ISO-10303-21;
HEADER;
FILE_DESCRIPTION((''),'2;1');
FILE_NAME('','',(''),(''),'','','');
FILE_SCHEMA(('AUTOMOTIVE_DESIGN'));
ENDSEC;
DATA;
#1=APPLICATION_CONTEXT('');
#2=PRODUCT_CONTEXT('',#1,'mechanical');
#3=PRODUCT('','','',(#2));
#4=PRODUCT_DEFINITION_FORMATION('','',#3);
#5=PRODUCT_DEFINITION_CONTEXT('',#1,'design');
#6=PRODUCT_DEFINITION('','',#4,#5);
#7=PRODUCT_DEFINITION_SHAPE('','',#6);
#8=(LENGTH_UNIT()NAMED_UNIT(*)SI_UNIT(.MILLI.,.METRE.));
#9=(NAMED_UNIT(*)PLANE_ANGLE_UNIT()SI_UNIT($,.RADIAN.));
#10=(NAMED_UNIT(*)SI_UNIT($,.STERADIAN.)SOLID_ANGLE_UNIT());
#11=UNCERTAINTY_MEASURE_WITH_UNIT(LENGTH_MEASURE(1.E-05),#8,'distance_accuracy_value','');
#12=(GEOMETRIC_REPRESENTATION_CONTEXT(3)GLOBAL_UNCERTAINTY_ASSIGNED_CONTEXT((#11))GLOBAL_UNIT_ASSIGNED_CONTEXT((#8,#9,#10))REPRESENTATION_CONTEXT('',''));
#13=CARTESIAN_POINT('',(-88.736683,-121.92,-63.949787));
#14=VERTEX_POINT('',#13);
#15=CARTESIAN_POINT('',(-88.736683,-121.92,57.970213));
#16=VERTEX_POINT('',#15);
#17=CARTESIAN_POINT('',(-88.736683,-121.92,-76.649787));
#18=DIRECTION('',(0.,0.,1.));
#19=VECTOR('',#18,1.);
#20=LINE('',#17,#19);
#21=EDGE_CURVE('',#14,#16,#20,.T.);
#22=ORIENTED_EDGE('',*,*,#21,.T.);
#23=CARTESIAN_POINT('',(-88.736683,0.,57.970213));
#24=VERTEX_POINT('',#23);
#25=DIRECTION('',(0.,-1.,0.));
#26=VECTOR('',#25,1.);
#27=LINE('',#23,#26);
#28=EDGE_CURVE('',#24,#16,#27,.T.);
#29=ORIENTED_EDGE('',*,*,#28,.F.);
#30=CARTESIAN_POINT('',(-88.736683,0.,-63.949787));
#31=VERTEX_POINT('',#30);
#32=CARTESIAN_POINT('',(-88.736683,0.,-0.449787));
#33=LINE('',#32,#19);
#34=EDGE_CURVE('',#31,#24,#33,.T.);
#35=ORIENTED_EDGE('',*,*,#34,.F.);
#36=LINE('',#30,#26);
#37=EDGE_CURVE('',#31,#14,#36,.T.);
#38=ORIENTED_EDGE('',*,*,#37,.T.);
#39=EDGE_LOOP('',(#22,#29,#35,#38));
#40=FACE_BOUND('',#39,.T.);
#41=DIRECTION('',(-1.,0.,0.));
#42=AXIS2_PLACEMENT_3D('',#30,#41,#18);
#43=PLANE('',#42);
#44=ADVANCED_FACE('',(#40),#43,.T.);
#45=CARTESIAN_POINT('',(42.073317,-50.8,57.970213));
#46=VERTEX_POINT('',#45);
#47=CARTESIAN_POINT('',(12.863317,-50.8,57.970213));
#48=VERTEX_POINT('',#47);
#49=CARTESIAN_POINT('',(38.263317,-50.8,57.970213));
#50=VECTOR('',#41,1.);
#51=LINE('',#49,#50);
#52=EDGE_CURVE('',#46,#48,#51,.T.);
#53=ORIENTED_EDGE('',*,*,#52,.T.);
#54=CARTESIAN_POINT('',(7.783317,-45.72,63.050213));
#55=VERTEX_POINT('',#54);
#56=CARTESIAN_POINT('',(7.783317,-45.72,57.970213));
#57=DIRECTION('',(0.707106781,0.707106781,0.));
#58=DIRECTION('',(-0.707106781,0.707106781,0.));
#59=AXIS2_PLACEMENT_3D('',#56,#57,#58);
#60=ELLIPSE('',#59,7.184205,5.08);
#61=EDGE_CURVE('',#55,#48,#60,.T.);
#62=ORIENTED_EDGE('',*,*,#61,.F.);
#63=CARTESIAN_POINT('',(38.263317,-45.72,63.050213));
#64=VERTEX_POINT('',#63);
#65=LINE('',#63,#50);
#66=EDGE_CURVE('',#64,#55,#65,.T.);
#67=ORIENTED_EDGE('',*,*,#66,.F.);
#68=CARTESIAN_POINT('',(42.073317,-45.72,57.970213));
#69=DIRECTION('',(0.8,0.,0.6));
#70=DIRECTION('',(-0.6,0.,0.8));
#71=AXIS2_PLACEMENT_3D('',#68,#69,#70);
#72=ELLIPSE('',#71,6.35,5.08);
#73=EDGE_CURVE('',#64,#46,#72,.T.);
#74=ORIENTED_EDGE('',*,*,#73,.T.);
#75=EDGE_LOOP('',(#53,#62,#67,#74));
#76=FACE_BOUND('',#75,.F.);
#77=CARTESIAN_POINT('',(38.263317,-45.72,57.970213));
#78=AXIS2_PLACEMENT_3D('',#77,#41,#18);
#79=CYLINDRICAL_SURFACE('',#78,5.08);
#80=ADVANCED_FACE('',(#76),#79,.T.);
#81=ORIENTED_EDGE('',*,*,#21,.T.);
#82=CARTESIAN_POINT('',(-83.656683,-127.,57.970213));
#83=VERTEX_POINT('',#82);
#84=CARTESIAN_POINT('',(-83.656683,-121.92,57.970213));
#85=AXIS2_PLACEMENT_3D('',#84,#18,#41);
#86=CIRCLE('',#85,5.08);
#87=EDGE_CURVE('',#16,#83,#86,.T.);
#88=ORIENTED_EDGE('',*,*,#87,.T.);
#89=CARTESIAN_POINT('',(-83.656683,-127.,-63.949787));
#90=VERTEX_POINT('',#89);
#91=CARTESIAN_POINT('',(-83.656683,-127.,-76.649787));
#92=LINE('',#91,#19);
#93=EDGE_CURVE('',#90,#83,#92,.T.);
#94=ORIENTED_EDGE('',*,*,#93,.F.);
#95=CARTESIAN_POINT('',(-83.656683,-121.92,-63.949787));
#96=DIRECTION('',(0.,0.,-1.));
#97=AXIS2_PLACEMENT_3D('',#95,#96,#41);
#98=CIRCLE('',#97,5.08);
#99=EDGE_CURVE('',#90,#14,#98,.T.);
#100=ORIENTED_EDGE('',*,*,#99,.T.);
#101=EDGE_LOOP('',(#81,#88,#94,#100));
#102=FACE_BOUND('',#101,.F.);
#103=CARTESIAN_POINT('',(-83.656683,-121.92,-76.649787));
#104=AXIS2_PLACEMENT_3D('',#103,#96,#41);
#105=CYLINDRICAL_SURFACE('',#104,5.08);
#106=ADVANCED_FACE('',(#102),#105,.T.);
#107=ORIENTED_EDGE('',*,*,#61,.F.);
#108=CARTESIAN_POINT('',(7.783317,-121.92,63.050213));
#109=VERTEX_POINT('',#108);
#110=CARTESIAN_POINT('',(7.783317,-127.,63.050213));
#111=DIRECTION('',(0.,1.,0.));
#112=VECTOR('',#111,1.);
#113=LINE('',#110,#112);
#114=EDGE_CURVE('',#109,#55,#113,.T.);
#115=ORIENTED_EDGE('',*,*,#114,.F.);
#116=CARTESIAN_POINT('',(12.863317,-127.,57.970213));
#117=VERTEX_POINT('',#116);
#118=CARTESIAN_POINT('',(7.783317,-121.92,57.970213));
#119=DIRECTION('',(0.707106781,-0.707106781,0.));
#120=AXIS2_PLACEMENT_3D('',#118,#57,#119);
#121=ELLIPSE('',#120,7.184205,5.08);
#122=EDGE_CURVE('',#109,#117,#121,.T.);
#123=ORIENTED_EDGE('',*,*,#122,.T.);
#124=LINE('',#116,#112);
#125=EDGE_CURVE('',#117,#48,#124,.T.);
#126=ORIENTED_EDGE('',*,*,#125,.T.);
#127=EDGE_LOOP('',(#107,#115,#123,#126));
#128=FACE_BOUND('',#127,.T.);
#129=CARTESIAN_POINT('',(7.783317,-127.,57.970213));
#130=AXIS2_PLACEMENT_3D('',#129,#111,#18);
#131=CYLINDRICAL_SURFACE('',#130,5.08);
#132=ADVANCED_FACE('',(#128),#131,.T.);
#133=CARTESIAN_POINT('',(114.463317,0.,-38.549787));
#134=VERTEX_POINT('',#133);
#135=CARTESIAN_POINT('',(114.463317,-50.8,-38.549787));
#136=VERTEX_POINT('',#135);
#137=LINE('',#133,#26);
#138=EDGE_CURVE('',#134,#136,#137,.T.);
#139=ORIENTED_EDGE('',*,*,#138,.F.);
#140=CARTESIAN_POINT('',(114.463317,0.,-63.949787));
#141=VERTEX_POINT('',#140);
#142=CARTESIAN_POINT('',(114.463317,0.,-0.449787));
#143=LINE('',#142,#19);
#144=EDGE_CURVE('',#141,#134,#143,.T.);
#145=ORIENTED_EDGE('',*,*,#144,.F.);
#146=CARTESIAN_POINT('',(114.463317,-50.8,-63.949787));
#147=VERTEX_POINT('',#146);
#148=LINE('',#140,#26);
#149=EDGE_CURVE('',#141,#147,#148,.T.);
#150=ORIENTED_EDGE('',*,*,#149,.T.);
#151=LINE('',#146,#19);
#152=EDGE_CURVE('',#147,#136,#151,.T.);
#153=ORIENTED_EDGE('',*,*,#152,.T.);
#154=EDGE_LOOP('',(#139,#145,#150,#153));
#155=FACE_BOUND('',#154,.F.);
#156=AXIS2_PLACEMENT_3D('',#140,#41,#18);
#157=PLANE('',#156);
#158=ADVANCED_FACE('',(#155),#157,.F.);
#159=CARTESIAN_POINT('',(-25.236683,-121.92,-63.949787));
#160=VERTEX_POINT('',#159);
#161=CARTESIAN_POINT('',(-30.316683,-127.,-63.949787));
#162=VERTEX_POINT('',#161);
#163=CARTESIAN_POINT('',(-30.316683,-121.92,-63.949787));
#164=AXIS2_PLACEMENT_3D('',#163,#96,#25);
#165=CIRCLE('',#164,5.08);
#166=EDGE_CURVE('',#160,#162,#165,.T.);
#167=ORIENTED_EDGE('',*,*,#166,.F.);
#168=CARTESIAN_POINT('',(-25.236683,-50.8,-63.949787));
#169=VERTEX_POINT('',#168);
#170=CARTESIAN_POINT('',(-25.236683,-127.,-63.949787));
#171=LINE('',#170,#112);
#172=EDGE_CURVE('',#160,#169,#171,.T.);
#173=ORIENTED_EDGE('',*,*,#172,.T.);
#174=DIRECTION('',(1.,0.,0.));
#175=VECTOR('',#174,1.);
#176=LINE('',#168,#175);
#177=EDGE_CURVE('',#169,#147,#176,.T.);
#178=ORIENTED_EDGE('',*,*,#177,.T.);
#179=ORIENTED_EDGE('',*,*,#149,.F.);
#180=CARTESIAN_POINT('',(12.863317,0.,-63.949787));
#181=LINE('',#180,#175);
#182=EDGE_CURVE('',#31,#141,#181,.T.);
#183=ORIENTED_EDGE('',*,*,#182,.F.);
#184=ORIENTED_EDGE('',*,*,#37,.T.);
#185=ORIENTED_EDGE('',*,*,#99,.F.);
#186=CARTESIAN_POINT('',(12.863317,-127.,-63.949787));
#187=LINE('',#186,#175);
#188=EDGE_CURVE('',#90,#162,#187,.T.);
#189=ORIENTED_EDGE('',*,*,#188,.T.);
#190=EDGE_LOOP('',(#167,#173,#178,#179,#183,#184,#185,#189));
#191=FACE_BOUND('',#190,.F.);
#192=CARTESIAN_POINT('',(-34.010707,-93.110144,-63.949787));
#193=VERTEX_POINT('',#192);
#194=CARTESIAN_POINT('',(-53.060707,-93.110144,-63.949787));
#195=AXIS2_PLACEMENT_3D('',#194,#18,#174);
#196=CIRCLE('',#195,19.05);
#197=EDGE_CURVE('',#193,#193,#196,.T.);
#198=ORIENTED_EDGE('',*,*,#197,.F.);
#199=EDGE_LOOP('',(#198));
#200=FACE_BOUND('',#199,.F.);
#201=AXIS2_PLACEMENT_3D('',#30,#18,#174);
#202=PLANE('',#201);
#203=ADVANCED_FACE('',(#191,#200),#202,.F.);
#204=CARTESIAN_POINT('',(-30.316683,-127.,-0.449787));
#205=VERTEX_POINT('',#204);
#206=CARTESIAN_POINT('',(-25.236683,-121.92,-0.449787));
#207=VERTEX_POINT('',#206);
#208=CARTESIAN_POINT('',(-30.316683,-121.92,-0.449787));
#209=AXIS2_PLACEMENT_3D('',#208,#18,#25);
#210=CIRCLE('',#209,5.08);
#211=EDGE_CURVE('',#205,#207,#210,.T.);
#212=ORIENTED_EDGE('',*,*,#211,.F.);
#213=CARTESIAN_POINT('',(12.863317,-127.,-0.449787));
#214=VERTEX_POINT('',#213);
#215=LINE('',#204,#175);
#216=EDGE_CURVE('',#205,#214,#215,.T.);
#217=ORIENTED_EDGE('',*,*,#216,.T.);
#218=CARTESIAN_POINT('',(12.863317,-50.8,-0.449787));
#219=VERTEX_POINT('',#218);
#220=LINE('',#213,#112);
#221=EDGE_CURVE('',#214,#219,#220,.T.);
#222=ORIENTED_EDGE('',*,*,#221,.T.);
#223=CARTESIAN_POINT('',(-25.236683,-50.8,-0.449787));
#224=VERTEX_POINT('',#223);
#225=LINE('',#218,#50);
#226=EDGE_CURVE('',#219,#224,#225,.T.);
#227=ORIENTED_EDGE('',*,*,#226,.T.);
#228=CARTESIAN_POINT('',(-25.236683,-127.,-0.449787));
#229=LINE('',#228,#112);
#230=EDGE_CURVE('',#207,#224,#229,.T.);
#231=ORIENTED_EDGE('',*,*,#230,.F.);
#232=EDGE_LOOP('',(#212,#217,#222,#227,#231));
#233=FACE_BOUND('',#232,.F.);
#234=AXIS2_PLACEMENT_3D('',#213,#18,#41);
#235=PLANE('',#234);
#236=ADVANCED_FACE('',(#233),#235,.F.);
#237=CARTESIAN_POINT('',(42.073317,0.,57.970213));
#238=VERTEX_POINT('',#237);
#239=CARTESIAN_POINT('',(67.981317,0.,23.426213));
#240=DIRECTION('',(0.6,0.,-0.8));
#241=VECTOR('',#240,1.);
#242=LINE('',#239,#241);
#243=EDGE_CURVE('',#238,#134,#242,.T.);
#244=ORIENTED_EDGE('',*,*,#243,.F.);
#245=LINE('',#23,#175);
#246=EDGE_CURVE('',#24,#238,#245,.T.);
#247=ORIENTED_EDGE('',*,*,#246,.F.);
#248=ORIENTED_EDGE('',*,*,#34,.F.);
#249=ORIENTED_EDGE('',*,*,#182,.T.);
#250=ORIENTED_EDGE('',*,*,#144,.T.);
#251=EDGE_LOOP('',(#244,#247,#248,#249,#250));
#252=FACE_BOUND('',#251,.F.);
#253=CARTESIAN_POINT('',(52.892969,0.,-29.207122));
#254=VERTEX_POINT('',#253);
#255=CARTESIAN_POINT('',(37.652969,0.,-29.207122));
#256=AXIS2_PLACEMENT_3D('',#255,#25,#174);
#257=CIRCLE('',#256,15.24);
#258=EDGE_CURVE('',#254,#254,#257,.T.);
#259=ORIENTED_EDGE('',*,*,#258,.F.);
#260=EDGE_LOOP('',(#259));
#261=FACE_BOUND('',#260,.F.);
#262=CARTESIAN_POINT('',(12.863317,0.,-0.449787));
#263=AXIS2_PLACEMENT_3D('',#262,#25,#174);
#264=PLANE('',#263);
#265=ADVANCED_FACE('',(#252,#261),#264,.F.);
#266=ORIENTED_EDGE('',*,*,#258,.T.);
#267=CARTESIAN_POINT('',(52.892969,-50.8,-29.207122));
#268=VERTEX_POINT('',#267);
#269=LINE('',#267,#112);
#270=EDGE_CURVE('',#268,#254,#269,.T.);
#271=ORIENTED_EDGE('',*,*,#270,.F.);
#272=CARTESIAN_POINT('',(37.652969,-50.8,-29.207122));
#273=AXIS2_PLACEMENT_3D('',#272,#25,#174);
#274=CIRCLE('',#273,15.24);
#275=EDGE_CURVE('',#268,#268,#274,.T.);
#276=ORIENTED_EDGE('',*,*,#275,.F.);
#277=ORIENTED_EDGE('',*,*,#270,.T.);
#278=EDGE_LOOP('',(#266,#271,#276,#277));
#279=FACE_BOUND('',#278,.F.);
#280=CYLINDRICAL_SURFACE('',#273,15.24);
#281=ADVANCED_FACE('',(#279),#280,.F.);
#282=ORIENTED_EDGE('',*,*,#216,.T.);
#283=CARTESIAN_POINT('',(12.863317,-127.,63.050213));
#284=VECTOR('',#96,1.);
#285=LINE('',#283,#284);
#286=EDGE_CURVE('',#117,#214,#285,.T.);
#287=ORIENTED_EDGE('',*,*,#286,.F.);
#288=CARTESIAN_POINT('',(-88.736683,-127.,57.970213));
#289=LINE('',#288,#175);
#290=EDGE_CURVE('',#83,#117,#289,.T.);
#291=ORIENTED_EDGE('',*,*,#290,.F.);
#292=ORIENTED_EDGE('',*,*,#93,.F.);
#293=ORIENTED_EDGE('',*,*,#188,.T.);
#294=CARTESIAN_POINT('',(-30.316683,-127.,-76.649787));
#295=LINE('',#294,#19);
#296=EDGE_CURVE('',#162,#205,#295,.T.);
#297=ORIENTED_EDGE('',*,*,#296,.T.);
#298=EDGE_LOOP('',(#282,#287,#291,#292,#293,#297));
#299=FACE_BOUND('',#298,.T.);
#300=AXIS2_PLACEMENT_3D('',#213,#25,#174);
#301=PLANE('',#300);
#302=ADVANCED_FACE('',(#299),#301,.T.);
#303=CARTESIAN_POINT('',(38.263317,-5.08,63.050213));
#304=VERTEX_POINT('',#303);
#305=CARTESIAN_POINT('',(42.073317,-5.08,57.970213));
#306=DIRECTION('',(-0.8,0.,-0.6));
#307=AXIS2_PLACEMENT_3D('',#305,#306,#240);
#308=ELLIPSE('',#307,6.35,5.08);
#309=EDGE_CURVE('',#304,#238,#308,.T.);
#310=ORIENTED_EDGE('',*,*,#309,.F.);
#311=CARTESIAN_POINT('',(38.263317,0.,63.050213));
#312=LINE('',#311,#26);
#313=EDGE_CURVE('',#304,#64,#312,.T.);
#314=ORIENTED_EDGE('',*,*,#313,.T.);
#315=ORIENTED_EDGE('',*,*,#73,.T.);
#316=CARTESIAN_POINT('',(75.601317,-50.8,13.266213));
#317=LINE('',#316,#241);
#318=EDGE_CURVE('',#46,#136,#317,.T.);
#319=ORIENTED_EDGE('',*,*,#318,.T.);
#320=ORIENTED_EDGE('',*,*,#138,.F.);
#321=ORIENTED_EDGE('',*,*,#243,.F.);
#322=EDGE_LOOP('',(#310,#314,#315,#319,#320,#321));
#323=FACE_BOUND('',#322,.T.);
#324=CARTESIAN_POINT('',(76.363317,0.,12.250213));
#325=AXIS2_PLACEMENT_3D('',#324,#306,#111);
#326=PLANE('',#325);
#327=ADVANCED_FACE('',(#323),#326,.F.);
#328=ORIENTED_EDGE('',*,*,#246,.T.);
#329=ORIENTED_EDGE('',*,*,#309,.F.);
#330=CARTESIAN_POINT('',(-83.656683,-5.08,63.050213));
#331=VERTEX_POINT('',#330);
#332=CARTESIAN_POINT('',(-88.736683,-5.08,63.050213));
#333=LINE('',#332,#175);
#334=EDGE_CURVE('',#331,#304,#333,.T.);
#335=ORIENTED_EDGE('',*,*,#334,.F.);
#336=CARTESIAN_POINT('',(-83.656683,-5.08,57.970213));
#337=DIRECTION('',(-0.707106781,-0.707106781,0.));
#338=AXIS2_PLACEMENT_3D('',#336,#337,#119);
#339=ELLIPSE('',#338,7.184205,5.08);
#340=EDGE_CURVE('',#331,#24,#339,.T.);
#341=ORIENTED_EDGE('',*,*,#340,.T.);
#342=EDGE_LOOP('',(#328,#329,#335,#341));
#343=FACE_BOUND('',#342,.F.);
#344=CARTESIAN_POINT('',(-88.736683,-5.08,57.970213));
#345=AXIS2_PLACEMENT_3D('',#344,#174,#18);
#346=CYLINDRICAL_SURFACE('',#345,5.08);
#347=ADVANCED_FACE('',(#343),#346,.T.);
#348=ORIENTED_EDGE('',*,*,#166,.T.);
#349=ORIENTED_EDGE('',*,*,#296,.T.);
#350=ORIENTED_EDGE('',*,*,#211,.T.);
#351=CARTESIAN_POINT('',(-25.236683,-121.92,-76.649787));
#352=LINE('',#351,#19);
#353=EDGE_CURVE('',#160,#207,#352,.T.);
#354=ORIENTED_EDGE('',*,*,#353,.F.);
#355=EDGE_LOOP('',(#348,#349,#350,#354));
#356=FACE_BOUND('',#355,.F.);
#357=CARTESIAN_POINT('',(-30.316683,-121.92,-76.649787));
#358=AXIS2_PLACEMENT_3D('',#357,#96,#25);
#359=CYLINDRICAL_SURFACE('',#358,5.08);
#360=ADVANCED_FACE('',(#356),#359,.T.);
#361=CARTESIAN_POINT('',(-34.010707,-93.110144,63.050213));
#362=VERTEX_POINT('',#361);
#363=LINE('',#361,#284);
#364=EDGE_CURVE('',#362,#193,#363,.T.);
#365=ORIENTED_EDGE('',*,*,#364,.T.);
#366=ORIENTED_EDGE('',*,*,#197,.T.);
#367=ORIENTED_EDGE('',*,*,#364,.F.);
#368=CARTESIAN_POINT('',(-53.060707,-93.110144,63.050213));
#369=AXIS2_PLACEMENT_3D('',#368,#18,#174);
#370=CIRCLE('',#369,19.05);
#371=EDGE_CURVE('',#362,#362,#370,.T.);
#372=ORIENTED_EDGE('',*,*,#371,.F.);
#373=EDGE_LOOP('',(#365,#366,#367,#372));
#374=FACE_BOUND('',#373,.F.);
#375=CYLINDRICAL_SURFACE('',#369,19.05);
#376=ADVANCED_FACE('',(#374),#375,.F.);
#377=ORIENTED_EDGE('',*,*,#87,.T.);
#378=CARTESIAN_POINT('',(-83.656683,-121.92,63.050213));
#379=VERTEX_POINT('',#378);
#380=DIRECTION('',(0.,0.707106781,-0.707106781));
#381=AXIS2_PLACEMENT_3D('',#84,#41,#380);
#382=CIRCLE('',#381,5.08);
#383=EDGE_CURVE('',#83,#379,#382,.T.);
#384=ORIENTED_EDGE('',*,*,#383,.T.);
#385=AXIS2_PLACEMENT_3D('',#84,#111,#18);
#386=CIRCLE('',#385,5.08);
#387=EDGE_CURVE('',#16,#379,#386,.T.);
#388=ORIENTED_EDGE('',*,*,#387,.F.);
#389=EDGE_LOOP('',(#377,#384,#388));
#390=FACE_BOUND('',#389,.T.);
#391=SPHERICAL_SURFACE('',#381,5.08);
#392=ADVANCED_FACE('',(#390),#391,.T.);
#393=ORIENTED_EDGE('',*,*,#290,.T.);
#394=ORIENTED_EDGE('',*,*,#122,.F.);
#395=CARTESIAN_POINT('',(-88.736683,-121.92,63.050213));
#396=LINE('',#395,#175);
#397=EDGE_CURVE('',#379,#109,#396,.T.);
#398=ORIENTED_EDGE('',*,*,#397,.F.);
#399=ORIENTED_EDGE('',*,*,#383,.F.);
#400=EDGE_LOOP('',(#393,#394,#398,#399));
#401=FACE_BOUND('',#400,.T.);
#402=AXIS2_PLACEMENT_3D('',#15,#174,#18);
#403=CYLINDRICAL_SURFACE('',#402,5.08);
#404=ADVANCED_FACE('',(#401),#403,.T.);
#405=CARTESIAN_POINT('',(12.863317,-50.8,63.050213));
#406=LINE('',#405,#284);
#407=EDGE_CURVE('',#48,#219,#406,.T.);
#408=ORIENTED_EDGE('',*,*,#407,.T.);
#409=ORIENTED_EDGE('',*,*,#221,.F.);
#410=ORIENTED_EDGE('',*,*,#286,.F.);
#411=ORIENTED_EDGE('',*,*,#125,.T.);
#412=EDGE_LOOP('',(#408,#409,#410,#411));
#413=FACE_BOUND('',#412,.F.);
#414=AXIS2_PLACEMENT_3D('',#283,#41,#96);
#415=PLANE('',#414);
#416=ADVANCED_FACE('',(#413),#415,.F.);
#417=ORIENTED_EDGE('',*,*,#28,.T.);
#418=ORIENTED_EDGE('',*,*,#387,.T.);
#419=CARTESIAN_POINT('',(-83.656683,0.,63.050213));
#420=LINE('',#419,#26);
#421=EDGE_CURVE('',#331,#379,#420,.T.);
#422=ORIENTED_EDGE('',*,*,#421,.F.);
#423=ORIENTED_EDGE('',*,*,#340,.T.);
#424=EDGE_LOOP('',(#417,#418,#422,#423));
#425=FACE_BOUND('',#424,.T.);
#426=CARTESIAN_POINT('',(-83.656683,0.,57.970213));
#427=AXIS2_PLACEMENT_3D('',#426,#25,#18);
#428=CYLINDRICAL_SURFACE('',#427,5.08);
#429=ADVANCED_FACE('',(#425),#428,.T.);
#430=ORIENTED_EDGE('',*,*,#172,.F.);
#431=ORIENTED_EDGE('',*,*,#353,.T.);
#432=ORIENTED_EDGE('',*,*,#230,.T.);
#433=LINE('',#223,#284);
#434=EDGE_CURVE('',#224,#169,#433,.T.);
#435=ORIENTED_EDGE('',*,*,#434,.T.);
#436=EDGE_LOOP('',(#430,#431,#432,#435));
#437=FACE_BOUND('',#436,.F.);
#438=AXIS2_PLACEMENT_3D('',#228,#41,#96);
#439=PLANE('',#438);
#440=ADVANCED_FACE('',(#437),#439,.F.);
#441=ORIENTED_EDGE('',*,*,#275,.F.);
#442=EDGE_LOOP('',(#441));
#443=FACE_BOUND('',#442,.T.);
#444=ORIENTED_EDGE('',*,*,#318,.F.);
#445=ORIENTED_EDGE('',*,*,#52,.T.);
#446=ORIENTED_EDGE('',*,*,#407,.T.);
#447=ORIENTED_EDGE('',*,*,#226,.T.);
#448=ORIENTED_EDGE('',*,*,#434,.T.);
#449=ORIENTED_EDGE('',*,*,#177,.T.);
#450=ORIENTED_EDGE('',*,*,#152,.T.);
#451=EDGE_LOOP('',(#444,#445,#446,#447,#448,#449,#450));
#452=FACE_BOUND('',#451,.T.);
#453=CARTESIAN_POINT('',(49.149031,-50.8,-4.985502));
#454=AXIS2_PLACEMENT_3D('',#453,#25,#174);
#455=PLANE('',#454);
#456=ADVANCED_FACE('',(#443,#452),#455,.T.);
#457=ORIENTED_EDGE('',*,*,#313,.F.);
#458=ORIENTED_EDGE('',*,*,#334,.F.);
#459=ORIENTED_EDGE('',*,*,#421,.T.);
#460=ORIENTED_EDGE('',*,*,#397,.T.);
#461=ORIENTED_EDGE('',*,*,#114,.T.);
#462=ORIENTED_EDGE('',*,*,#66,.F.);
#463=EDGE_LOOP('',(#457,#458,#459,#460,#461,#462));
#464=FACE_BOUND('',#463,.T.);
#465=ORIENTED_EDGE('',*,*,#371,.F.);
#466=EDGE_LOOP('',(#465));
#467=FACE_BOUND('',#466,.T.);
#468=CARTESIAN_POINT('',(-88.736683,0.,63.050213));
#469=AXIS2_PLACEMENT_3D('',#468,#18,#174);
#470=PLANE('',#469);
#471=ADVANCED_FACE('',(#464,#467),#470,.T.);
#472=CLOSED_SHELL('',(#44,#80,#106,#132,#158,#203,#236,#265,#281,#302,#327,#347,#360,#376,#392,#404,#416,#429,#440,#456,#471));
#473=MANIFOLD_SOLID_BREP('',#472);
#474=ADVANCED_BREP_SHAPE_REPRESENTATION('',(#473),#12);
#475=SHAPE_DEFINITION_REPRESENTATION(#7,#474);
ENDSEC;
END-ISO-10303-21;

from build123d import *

# Parameters (mm, degrees)
F0_W        = 203.2
F0_H        = 127
F1_DEPTH    = 127
F3_DEPTH    = 76.2
F4_SIZE2    = 101.6
F4_SIZE     = 76.2
F5_R        = 5.08
F6_T1_DEPTH = 76.2
F6_T3_DEPTH = 134.62
F6_S7_W     = 5.08
F6_S7_H     = 5.08
F6_T8_DEPTH = 5.08
F7_R        = 15.24
F8_DEPTH    = 50.8
F9_R        = 19.05
F10_DEPTH   = 127


# Not quite as in the source:
# - a fillet or chamfer that OpenCascade refuses, or shapes differently, is made with other operations: its cross-section is extruded or revolved along the edge and cut away or added


with BuildPart() as f1:
    # F0 (on Front) → F1 (new body)
    with BuildSketch(Plane.XZ):
        with Locations((12.863317194, -0.4497872638)):
            Rectangle(F0_W, F0_H)
    extrude(amount=F1_DEPTH)

    # F2 (on face) → F3 (cut)
    with BuildSketch(Plane.XZ.offset(127)):
        Polygon((114.463317194, 63.0502127362), (12.863317194, 63.0502127362), (12.863317194, -0.4497872638), (-25.236682806, -0.4497872638), (-25.236682806, -63.9497872638), (114.463317194, -63.9497872638), align=None)
    extrude(amount=-F3_DEPTH, mode=Mode.SUBTRACT)

    # F4
    f4_edges = [f1.edges().sort_by_distance(p)[0] for p in [
        (114.463317, -25.4, 63.050213),
    ]]
    f4_side = f1.faces().sort_by_distance((-8.908111, -52.614286, 63.050213))[0]
    chamfer(f4_edges, length=F4_SIZE, length2=F4_SIZE2, reference=f4_side)

    # F5
    f5_edges = [f1.edges().sort_by_distance(p)[0] for p in [
        (-37.936683, -127, 63.050213),
        (-88.736683, -63.5, 63.050213),
        (12.863317, -88.9, 63.050213),
        (25.563317, -50.8, 63.050213),
        (-25.236683, 0, 63.050213),
    ]]
    fillet(f5_edges, radius=F5_R)

    # F6: fillet of radius 5.08 on 2 edges, made by hand

    # F6_s2 → F6_t1 (cut)
    with BuildSketch(Plane.XY.offset(-76.6497872638)):
        with BuildLine():
            ThreePointArc((-30.316682806, -127), (-26.7245803576, -125.5121024484), (-25.236682806, -121.92))
            Line((-25.236682806, -121.92), (-25.236682806, -127))
            Line((-25.236682806, -127), (-30.316682806, -127))
        make_face()
    extrude(amount=F6_T1_DEPTH, mode=Mode.SUBTRACT)

    # F6_s4 → F6_t3 (cut)
    with BuildSketch(Plane.XY.offset(-76.6497872638)):
        with BuildLine():
            ThreePointArc((-88.736682806, -121.92), (-87.2487852545, -125.5121024484), (-83.656682806, -127))
            Line((-83.656682806, -127), (-88.736682806, -127))
            Line((-88.736682806, -127), (-88.736682806, -121.92))
        make_face()
    extrude(amount=F6_T3_DEPTH, mode=Mode.SUBTRACT)


with BuildPart() as f6_tool6:
    # F6_s7 → F6_t8 (new body)
    with BuildSketch(Plane.YZ.offset(-83.656682806)):
        with Locations((-124.46, 60.5102127362)):
            Rectangle(F6_S7_W, F6_S7_H)
    extrude(amount=-F6_T8_DEPTH)

    # F6_s9 → F6_t10 (revolve, cut)
    with BuildSketch(Plane(origin=(-83.656682806, -121.92, 57.9702127362), x_dir=(0, 0.7071067812, -0.7071067812), z_dir=(0, 0.7071067812, 0.7071067812))):
        with BuildLine():
            ThreePointArc((0, -5.08), (5.08, 0), (0, 5.08))
            Line((0, 5.08), (0, -5.08))
        make_face()
    revolve(axis=Axis((-83.656682806, -121.92, 57.9702127362), (-1, 0, 0)), mode=Mode.SUBTRACT)


with BuildPart() as f1_1:
    add(f1.part)

    # F6_t5: cut F6_tool6
    add(f6_tool6.part, mode=Mode.SUBTRACT)

    # F7 (on face) → F8 (cut, through all)
    with BuildSketch(Plane.XZ.offset(50.8)):
        with Locations((37.6529693604, -29.2071215808)):
            Circle(F7_R)
    extrude(amount=-F8_DEPTH, mode=Mode.SUBTRACT)

    # F9 (on face) → F10 (cut, through all)
    with BuildSketch(Plane.XY.offset(63.0502127362)):
        with Locations((-53.0607067049, -93.1101441383)):
            Circle(F9_R)
    extrude(amount=-F10_DEPTH, mode=Mode.SUBTRACT)


solid = f1_1.part
